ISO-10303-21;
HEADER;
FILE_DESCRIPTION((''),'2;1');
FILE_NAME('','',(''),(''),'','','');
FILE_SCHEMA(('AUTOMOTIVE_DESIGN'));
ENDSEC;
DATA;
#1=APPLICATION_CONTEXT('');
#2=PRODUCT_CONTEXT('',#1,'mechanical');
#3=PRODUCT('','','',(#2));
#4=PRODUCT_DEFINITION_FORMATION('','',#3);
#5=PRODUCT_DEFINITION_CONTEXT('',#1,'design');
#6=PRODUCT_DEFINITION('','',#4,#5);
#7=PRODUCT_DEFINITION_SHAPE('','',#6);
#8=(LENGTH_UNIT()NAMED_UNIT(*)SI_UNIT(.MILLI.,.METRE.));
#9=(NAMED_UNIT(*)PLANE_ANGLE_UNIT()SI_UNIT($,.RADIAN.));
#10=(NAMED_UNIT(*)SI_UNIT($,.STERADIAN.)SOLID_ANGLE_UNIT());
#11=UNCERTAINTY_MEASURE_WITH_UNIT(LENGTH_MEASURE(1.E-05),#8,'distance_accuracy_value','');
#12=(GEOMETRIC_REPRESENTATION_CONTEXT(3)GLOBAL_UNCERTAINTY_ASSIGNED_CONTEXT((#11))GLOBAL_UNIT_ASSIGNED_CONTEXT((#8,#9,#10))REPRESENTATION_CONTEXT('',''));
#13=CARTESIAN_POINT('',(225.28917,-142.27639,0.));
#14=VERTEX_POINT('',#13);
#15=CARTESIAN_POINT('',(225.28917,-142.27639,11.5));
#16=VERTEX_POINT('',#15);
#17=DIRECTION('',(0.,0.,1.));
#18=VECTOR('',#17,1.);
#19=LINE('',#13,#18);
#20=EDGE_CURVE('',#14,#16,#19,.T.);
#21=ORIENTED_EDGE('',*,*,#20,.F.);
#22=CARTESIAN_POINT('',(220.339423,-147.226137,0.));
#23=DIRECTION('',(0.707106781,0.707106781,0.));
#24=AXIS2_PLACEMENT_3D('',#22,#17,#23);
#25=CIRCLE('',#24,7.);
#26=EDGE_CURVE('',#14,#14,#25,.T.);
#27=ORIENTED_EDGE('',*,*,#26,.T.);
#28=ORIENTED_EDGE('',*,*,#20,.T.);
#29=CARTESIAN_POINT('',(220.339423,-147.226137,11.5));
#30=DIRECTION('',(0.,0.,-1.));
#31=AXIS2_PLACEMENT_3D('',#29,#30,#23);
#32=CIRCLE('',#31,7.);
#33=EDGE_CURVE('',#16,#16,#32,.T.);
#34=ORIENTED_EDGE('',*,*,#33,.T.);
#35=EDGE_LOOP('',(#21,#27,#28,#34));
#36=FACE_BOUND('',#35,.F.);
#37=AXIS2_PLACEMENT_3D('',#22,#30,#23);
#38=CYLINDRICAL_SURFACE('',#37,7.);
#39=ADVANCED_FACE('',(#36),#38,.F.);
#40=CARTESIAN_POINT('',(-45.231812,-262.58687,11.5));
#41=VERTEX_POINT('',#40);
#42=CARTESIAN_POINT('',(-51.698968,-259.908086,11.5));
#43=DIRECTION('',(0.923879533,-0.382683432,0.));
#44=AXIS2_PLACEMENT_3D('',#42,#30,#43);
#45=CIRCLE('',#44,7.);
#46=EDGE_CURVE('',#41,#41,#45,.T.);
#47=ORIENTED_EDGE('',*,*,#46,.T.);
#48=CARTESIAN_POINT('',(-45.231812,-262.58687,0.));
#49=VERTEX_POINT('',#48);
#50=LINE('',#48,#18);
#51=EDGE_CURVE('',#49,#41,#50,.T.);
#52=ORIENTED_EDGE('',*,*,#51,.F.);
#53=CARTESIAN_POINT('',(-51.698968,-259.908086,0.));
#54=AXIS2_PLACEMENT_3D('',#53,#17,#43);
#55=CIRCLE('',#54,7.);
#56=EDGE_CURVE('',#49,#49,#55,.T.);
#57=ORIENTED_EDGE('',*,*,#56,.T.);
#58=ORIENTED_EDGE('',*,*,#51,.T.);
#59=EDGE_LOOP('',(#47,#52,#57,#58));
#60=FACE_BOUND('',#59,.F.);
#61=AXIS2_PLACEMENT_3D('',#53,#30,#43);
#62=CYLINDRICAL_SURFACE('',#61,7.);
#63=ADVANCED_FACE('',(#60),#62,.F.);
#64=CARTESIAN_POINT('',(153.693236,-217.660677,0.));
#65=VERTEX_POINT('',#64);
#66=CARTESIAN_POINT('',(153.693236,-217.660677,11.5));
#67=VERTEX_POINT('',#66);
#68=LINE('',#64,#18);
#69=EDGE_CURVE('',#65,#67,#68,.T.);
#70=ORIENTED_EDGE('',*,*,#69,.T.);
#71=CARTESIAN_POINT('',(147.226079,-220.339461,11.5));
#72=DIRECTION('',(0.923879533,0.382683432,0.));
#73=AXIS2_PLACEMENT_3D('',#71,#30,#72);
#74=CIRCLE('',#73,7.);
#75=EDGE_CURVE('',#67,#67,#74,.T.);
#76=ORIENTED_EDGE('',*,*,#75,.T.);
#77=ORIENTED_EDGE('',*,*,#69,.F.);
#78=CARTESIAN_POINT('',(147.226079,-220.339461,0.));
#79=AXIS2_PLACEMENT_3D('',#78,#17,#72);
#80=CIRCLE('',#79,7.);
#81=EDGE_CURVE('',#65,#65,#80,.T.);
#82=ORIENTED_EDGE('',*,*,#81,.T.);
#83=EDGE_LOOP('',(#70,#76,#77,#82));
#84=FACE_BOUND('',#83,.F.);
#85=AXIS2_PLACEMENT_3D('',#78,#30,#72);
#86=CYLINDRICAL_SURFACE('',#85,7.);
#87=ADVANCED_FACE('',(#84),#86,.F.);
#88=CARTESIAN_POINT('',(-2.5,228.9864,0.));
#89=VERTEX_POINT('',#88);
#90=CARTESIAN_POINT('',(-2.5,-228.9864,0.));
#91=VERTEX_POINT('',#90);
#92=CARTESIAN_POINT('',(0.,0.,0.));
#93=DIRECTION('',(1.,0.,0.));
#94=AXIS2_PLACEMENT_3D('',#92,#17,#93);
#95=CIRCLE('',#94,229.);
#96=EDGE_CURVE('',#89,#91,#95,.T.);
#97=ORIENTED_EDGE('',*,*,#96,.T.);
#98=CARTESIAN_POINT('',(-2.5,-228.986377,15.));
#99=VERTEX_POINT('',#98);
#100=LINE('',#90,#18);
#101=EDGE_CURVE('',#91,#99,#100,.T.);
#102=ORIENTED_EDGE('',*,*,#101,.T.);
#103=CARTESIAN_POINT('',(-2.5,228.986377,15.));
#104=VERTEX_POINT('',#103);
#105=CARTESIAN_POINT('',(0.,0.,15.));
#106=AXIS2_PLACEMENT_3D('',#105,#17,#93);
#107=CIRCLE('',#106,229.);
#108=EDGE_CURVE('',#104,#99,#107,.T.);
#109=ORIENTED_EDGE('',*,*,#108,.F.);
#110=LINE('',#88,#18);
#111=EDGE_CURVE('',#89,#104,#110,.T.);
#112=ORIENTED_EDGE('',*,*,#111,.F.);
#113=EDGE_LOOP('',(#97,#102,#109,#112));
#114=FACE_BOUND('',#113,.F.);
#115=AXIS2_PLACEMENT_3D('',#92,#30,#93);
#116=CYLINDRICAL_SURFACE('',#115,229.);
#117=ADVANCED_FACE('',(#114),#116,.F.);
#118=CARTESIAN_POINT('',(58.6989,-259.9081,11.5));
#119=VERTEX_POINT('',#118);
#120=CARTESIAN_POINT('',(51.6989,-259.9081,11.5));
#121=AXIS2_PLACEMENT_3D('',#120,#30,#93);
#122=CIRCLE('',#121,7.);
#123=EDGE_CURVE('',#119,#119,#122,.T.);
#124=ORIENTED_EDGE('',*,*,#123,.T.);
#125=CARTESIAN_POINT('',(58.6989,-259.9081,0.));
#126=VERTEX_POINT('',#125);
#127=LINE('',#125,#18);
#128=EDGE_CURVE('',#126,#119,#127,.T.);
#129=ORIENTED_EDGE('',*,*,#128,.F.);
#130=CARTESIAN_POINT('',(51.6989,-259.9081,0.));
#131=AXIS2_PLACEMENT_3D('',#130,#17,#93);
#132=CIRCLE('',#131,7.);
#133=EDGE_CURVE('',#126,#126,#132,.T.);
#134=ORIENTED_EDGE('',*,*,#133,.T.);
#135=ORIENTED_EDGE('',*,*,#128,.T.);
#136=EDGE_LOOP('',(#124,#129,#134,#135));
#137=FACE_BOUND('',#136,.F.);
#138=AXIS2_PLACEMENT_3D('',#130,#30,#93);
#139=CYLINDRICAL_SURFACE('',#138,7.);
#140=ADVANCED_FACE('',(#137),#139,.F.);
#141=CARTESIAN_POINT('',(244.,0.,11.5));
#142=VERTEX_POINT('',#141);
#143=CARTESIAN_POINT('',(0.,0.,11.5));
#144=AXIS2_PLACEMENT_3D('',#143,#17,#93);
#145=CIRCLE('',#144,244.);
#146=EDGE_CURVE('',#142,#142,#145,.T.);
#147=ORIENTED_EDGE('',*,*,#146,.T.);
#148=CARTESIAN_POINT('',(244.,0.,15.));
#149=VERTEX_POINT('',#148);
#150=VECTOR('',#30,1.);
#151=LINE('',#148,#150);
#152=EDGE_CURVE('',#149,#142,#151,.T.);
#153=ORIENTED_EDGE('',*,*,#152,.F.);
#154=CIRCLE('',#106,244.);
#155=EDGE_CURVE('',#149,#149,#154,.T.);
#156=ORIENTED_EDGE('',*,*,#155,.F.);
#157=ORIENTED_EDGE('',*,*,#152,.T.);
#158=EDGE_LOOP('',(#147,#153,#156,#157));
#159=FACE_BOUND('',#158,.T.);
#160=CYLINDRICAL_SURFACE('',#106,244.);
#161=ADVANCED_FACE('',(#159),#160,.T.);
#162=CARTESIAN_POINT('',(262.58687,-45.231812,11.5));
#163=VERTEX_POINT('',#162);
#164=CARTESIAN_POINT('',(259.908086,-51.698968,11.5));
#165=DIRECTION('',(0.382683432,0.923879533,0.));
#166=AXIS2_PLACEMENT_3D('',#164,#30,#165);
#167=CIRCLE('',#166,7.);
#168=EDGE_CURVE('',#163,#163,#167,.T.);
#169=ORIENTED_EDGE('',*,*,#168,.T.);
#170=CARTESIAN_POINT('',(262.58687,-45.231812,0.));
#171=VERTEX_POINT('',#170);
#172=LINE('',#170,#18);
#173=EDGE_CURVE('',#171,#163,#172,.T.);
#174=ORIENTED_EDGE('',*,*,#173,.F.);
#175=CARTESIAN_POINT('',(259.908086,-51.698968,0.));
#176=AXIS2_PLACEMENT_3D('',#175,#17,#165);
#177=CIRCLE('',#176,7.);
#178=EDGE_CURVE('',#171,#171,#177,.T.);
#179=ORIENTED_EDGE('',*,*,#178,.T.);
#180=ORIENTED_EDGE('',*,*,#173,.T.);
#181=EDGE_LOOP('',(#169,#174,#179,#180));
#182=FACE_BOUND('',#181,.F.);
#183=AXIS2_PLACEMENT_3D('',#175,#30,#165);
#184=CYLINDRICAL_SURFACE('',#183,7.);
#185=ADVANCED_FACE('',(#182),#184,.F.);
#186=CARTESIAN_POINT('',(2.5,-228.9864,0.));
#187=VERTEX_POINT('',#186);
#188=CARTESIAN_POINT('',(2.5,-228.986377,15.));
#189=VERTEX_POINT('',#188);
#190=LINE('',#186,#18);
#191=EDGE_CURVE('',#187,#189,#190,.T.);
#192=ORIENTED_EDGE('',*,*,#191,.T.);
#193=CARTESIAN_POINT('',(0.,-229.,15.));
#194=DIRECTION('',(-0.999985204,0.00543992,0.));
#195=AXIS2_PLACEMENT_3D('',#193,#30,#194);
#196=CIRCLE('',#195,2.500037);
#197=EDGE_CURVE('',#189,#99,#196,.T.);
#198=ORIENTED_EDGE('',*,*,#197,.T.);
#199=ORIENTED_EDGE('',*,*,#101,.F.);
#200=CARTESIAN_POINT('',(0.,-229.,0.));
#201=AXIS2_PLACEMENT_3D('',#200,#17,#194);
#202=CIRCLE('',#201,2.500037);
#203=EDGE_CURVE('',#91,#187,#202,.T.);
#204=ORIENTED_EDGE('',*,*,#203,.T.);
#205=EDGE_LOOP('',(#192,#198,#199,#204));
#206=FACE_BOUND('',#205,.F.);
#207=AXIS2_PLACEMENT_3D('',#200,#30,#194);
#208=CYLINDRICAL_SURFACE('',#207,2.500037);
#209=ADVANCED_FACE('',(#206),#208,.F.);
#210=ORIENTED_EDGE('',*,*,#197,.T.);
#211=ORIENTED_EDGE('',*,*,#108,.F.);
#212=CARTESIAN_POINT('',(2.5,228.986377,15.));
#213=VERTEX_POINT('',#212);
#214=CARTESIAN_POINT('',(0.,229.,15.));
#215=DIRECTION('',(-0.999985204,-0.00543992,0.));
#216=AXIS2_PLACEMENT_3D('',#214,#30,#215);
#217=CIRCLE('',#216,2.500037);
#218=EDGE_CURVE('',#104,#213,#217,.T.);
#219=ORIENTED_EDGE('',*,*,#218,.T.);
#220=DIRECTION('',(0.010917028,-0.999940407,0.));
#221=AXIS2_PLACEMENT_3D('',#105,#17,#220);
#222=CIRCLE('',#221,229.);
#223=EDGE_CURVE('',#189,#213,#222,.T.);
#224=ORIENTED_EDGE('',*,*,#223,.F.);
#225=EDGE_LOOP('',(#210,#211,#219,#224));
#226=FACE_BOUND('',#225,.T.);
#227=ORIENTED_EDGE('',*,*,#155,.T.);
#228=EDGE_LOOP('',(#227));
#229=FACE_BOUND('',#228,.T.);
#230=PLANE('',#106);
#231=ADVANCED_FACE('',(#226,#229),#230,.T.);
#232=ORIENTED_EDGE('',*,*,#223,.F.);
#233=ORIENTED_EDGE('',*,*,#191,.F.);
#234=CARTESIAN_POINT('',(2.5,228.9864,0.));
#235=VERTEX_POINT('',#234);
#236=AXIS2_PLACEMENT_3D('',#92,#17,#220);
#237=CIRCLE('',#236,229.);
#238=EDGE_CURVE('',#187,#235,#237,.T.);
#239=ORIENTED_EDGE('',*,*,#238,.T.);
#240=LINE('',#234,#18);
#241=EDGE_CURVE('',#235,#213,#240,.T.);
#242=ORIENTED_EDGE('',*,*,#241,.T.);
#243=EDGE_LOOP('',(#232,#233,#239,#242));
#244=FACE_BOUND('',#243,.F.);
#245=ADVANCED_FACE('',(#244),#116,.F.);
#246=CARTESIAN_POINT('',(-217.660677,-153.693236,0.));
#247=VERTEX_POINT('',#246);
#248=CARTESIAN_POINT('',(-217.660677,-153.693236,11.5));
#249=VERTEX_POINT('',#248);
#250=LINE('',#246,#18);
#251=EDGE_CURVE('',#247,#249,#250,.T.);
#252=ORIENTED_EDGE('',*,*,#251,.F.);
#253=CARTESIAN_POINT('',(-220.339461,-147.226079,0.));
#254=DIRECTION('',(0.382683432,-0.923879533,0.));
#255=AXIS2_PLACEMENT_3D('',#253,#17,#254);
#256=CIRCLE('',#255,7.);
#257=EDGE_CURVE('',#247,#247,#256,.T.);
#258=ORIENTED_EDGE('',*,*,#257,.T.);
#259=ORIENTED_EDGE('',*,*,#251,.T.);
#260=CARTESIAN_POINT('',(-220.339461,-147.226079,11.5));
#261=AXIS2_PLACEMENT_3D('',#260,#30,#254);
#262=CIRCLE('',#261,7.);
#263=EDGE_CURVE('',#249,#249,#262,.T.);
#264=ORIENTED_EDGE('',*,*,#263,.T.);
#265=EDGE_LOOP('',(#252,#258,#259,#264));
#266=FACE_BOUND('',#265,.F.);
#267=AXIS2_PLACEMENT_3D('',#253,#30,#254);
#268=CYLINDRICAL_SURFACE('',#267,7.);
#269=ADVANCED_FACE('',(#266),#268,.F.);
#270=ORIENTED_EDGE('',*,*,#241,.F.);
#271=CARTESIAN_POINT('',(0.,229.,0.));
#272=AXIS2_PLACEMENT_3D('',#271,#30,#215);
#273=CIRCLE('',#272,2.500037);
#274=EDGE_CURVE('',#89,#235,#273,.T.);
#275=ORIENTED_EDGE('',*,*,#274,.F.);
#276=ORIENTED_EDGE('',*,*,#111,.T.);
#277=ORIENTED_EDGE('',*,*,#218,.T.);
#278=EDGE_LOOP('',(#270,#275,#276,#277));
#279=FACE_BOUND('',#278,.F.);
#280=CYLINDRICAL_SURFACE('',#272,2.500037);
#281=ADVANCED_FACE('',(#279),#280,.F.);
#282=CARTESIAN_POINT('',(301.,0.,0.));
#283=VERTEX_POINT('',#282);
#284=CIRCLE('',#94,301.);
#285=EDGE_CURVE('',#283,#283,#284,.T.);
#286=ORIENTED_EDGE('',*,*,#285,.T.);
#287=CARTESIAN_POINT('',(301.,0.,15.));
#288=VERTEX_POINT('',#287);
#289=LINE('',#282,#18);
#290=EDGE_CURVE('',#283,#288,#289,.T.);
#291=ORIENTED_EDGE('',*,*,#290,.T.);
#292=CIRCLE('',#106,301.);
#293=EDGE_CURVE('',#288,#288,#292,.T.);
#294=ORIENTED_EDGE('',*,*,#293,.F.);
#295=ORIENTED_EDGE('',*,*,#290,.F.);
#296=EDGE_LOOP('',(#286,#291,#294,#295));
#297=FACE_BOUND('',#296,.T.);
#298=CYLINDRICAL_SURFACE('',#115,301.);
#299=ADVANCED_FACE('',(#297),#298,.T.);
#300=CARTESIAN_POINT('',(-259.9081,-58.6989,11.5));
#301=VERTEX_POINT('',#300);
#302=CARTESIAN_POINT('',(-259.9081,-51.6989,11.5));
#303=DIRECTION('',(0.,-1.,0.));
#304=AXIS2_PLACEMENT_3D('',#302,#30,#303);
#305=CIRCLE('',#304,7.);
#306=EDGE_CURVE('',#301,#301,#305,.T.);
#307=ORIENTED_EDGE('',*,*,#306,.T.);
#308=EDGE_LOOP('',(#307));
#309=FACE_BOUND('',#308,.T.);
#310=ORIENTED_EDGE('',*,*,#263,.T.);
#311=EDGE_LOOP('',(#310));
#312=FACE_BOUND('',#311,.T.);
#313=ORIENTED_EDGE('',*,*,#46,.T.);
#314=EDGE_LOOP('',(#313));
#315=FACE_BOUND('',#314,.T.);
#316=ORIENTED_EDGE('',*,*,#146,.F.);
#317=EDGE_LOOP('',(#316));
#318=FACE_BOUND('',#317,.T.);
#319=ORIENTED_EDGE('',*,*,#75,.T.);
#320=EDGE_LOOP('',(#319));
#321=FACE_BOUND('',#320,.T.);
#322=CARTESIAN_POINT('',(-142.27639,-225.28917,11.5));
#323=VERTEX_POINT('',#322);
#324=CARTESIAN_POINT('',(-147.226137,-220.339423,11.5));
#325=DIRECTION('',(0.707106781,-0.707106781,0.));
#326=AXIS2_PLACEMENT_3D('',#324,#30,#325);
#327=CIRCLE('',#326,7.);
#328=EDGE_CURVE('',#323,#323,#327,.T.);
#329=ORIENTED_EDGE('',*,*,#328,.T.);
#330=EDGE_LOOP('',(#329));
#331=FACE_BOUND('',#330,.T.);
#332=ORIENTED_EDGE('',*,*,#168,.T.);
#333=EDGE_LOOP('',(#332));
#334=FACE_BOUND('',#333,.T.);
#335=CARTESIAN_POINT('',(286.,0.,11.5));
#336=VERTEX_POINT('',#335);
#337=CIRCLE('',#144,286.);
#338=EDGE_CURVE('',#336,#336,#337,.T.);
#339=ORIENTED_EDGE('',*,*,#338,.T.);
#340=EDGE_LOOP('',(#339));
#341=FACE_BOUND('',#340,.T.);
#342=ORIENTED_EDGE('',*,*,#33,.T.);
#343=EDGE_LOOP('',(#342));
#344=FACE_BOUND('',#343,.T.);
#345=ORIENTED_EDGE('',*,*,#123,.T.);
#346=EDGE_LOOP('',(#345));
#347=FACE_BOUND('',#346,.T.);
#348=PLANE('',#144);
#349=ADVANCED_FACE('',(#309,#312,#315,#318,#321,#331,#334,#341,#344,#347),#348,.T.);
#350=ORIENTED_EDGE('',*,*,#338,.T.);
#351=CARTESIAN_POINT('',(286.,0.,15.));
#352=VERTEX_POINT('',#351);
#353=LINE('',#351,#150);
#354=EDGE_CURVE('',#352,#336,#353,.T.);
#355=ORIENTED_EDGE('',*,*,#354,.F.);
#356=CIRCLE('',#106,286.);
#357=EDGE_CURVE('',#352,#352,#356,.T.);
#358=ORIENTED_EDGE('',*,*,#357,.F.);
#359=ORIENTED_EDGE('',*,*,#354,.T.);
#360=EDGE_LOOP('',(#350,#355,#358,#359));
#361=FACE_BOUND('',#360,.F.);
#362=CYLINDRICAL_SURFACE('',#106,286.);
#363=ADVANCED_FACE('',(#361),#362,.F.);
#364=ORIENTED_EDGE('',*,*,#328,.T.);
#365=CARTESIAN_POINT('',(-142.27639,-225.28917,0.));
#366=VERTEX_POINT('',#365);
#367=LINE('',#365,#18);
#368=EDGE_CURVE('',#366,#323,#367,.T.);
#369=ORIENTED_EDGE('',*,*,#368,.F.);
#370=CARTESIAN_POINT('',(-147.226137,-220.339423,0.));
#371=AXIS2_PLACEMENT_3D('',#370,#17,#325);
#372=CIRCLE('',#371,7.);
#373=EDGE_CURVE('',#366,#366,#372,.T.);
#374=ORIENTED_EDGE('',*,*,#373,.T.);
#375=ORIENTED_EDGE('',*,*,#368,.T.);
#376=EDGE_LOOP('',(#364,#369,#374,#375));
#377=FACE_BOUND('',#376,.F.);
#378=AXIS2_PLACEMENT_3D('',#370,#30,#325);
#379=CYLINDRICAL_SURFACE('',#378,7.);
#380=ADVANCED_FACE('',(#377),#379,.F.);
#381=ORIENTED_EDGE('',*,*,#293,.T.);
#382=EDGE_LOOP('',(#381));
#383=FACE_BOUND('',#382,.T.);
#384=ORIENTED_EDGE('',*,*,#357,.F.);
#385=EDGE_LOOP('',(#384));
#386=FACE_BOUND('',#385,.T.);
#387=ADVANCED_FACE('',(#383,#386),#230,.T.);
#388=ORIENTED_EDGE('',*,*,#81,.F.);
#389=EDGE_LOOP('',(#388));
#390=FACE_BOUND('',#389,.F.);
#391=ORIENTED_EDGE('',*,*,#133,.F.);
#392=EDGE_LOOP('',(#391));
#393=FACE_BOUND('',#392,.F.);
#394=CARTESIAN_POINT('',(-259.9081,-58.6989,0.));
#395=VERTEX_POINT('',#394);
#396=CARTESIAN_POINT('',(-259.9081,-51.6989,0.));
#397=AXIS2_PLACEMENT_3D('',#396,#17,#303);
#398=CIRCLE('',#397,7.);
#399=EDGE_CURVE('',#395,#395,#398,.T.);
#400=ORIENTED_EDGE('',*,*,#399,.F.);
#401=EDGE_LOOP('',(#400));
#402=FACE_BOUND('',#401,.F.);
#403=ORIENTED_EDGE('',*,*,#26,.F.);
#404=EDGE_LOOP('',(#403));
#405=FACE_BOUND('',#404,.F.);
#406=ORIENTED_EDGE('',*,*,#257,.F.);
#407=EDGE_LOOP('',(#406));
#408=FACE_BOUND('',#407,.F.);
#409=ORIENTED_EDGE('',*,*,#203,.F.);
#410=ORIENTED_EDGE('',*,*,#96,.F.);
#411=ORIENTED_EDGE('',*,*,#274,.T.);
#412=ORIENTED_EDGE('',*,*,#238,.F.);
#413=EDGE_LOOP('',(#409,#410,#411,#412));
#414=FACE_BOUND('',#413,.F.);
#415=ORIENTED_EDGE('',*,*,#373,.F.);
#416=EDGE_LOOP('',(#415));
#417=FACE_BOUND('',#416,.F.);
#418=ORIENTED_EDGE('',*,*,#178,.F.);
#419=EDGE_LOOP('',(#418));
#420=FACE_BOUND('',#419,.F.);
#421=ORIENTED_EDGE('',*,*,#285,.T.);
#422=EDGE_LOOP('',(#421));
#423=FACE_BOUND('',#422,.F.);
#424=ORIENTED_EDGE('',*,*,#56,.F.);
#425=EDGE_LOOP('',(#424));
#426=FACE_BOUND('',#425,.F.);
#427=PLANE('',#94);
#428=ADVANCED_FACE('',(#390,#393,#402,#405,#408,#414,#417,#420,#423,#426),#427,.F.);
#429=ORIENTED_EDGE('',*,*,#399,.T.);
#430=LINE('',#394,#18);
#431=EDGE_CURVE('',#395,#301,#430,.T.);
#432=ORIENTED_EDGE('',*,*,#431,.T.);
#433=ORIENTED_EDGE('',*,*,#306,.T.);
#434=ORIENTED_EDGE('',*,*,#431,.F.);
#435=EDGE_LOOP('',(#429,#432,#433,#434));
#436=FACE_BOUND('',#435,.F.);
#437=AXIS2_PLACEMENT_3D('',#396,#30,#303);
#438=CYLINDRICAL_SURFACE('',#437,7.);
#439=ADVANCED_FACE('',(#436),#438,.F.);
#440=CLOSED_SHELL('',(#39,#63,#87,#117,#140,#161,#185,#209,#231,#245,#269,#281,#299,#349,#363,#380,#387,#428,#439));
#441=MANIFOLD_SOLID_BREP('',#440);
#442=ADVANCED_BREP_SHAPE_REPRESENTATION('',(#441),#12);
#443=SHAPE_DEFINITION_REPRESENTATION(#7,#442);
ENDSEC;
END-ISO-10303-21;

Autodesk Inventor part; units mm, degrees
ref_plane "YZ Plane" through (0, 0, 0) normal (1, 0, 0) x (0, 1, 0)
ref_plane "XZ Plane" through (0, 0, 0) normal (0, 1, 0) x (-1, 0, 0)
ref_plane "XY Plane" through (0, 0, 0) normal (0, 0, 1) x (1, 0, 0)
sketch "Sketch1" plane through (0, 0, 0) normal (0, 0, 1) x (1, 0, 0)
  circle A0 centre (0, 0) radius 229
  circle A1 centre (0, 0) radius 301
  circle A2 centre (0, 0) radius 265 construction
  line L0 (0, 229) -> (0, 301) construction
  point P0 (0, 265)
  dimension "d17" = 530
  dimension "d18" = 72
extrude "Extrusion1" add sketch "Sketch1" along normal blind 15
sketch "Sketch2" plane through (0, 0, 15) normal (0, 0, 1) x (1, 0, 0)
  circle A0 centre (0, 0) radius 301 construction
  circle A1 centre (0, 0) radius 229 construction
  line L0 (0, 286) -> (0, 244) construction
  line L1 (0, 229) -> (0, 0) construction
  circle A2 centre (0, 0) radius 244
  circle A3 centre (0, 0) radius 286
  circle A4 centre (0, 0) radius 265 construction
  point P0 (0, 265)
  dimension "d19" = 530
  dimension "d4" = 42
extrude "Extrusion2" cut sketch "Sketch2" against normal blind 3.5
sketch "Sketch3" plane through (0, 0, 0) normal (0, 0, 1) x (1, 0, 0)
  circle A0 centre (0, 0) radius 229 construction
  circle A1 centre (0, 0) radius 301 construction
  circle A2 centre (0, 0) radius 244 projected
  circle A3 centre (0, 0) radius 286 projected
  circle A4 centre (0, 0) radius 301 projected
  line L0 (0, 0) -> (0, -301) construction
  line L1 (0, 0) -> (58.7222, -295.2164) construction
  line L2 (47.602, -239.3116) -> (55.7958, -280.5046) construction
  circle A5 centre (51.6989, -259.9081) radius 7
  dimension "d20" = 11.25
  dimension "d21" = 14
extrude "Extrusion3" cut sketch "Sketch3" along normal through all contours A5
pattern_circular "Circular Pattern2" count 8 over 157.5 about axis through (0, 0, 0) along (0, 0, -1) of "Extrusion3" both ways yes
sketch "Sketch5" plane through (0, 0, 0) normal (0, 0, -1) x (-1, 0, 0)
  circle A0 centre (0, 0) radius 301 projected
  circle A1 centre (0, 0) radius 229 projected
  line L0 (0, 0) -> (0, 229) construction
  arc A2 (2.5, 228.9864) -> (-2.5, 228.9864) centre (0, 229) ccw
  dimension "d40" = 5
extrude "Extrusion4" cut sketch "Sketch5" against normal through all contours A1 A2
mirror "Mirror1" about plane through (0, 0, 0) normal (0, 1, 0) of "Extrusion4"
equation "\"d17\" = Шпил_пласт_КОРМА_диам_центров"
equation "\"d19\" = Шпил_пласт_КОРМА_диам_центров"
equation "\"BendReliefDepth\" = 0.5 * Thickness"
equation "\"Шпил_пласт_КОРМА_диам_центров\" = 530"
equation "\"Thickness\" = 10"
properties part number "ДМФ 022 кольцо прижимное корма внутреннее"
